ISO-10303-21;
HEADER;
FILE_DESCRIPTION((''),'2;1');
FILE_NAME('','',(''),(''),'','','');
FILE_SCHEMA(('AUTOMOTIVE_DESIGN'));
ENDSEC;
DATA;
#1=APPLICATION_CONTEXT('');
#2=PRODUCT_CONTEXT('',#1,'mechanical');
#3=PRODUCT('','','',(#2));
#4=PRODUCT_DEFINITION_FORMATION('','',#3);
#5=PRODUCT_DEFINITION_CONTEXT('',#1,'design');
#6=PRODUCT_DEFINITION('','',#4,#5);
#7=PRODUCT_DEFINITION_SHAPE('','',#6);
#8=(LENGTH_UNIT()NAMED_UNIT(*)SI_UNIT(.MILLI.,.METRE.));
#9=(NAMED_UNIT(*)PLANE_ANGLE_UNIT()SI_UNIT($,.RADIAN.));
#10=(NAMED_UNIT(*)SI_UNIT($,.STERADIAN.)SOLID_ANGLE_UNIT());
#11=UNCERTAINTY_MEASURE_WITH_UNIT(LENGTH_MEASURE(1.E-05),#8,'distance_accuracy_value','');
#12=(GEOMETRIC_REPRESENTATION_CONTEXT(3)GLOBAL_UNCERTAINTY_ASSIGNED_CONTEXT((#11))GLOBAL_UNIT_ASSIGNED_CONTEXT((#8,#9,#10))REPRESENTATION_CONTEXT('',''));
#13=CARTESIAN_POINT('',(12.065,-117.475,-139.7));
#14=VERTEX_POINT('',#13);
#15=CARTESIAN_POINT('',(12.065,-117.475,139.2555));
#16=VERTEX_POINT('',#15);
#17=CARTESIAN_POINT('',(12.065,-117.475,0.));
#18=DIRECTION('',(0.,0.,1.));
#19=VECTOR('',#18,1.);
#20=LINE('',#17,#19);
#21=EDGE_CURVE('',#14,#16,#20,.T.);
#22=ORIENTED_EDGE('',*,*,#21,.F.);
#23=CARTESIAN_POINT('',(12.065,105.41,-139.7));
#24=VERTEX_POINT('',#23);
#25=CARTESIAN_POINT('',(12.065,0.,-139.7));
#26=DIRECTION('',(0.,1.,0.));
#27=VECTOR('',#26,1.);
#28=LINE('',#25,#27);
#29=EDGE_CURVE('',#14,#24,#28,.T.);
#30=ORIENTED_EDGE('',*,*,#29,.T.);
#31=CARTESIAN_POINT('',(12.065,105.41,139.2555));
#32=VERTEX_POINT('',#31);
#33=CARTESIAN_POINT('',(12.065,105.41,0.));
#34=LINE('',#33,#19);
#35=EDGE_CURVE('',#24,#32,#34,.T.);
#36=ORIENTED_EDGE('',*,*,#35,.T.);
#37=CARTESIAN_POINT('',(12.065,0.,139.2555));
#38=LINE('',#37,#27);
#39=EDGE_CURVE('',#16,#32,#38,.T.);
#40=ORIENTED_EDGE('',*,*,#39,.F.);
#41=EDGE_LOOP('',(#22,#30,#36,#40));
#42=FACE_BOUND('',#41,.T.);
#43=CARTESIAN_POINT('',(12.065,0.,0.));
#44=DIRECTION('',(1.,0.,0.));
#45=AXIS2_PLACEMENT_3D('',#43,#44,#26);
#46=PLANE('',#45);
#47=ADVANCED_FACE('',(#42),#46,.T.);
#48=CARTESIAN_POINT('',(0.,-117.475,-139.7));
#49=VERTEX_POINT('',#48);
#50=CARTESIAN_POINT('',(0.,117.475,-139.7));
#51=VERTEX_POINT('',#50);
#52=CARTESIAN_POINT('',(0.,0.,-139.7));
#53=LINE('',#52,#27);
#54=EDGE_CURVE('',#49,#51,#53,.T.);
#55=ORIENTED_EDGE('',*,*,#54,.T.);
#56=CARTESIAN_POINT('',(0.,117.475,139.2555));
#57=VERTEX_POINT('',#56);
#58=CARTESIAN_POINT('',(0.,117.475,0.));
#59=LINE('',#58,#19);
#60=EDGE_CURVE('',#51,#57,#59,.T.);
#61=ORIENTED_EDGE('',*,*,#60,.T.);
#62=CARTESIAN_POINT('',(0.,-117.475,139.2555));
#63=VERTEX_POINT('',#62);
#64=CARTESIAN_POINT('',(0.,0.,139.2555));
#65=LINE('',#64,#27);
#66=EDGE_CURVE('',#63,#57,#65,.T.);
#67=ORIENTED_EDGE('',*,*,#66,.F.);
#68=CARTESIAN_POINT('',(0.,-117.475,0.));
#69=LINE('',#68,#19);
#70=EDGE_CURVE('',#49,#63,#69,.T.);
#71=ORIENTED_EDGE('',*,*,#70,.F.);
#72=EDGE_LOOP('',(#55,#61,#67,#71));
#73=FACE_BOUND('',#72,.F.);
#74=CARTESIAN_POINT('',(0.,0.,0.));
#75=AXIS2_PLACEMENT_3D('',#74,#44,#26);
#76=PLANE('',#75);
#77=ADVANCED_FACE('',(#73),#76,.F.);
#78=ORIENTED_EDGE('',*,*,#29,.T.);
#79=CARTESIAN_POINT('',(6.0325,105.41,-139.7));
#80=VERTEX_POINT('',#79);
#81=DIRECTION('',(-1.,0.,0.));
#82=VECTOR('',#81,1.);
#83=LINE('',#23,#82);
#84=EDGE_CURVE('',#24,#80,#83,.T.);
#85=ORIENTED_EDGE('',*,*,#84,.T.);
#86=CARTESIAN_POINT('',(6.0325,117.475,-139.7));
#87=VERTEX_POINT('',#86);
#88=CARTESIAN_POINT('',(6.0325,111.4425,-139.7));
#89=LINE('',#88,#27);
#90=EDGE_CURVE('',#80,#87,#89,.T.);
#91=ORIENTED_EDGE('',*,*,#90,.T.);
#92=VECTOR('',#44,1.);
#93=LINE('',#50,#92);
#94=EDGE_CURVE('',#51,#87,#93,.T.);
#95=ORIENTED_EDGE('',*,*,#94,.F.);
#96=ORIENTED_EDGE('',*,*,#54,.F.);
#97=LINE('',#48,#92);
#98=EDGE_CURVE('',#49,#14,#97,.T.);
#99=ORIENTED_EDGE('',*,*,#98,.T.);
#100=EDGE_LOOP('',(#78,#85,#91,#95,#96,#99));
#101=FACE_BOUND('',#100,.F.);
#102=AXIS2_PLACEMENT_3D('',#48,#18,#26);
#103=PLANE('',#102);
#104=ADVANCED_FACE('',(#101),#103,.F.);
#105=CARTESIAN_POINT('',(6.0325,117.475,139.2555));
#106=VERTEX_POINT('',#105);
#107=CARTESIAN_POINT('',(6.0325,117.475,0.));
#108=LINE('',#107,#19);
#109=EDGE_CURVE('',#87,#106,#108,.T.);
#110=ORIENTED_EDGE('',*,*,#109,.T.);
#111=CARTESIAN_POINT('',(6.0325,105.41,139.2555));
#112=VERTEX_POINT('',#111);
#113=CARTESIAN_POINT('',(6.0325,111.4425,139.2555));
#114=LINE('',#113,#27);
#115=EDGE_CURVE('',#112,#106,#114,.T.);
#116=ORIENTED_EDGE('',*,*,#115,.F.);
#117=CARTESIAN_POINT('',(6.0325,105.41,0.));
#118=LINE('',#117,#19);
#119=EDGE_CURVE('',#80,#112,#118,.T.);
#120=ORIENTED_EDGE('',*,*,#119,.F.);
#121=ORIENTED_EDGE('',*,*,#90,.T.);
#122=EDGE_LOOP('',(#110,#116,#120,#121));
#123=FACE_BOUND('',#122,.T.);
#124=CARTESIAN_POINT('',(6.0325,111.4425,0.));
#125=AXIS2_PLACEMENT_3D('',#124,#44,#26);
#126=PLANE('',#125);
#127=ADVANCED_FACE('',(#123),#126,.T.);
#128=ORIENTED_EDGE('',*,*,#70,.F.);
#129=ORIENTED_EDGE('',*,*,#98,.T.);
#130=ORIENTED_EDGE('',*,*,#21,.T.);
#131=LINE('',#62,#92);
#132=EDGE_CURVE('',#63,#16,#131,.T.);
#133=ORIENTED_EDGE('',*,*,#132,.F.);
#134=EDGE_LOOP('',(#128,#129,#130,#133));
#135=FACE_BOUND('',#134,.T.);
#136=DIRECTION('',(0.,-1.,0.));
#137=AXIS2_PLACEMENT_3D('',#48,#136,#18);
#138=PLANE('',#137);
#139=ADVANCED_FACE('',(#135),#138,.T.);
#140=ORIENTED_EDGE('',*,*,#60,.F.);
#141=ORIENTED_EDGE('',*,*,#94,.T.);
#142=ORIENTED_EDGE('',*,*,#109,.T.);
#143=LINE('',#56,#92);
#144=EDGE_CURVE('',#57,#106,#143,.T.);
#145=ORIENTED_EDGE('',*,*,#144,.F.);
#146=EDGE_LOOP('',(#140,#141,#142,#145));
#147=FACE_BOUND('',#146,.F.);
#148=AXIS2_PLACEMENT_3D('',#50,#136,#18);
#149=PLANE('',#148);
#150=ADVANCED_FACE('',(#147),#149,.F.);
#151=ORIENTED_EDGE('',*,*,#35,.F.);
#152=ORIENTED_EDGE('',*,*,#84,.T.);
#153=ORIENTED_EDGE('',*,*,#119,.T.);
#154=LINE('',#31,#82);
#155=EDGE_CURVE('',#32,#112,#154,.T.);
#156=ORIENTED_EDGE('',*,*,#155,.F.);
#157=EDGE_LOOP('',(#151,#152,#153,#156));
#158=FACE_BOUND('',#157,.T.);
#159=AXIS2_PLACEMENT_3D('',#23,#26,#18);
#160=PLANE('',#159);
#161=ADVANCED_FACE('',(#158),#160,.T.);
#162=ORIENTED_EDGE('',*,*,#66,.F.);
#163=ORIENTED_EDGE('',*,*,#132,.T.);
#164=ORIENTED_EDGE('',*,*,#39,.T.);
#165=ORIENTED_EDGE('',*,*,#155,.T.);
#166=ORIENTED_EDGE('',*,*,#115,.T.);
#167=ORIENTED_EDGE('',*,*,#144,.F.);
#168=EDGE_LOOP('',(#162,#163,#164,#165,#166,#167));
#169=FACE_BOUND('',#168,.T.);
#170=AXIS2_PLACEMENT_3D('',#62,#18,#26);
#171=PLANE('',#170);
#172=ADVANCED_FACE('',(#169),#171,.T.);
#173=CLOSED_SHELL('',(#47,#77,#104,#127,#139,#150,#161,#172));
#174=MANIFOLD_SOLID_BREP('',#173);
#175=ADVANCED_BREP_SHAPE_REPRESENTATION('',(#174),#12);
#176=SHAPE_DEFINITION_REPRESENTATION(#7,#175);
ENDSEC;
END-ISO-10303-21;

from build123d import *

# Parameters (mm, degrees)
F0_W     = 234.95
F0_H     = 279.4
F2_DEPTH = 12.065
F3_W     = 12.065
F3_H     = 279.4
F4_DEPTH = 6.0325
F5_DEPTH = 0.4445


# Not quite as in the source:
# - a variable given as a bare number and used for a length is read in inches; the dataset says mm whatever the document's units were


with BuildPart() as f2:
    # F0 (on Right) → F2 (new body)
    with BuildSketch(Plane.YZ):
        Rectangle(F0_W, F0_H)
    extrude(amount=F2_DEPTH)

    # F3 (on face) → F4 (cut)
    with BuildSketch(Plane.YZ.offset(12.065)):
        with Locations((111.4425, 0)):
            Rectangle(F3_W, F3_H)
    extrude(amount=-F4_DEPTH, mode=Mode.SUBTRACT)

    # F5 (cut): a face of the model
    f5_faces = [f2.faces().sort_by_distance(p)[0] for p in [
        (5.9530149098, -2.9367649098, 139.7),
    ]]
    extrude(f5_faces, amount=-F5_DEPTH, mode=Mode.SUBTRACT)


solid = f2.part
